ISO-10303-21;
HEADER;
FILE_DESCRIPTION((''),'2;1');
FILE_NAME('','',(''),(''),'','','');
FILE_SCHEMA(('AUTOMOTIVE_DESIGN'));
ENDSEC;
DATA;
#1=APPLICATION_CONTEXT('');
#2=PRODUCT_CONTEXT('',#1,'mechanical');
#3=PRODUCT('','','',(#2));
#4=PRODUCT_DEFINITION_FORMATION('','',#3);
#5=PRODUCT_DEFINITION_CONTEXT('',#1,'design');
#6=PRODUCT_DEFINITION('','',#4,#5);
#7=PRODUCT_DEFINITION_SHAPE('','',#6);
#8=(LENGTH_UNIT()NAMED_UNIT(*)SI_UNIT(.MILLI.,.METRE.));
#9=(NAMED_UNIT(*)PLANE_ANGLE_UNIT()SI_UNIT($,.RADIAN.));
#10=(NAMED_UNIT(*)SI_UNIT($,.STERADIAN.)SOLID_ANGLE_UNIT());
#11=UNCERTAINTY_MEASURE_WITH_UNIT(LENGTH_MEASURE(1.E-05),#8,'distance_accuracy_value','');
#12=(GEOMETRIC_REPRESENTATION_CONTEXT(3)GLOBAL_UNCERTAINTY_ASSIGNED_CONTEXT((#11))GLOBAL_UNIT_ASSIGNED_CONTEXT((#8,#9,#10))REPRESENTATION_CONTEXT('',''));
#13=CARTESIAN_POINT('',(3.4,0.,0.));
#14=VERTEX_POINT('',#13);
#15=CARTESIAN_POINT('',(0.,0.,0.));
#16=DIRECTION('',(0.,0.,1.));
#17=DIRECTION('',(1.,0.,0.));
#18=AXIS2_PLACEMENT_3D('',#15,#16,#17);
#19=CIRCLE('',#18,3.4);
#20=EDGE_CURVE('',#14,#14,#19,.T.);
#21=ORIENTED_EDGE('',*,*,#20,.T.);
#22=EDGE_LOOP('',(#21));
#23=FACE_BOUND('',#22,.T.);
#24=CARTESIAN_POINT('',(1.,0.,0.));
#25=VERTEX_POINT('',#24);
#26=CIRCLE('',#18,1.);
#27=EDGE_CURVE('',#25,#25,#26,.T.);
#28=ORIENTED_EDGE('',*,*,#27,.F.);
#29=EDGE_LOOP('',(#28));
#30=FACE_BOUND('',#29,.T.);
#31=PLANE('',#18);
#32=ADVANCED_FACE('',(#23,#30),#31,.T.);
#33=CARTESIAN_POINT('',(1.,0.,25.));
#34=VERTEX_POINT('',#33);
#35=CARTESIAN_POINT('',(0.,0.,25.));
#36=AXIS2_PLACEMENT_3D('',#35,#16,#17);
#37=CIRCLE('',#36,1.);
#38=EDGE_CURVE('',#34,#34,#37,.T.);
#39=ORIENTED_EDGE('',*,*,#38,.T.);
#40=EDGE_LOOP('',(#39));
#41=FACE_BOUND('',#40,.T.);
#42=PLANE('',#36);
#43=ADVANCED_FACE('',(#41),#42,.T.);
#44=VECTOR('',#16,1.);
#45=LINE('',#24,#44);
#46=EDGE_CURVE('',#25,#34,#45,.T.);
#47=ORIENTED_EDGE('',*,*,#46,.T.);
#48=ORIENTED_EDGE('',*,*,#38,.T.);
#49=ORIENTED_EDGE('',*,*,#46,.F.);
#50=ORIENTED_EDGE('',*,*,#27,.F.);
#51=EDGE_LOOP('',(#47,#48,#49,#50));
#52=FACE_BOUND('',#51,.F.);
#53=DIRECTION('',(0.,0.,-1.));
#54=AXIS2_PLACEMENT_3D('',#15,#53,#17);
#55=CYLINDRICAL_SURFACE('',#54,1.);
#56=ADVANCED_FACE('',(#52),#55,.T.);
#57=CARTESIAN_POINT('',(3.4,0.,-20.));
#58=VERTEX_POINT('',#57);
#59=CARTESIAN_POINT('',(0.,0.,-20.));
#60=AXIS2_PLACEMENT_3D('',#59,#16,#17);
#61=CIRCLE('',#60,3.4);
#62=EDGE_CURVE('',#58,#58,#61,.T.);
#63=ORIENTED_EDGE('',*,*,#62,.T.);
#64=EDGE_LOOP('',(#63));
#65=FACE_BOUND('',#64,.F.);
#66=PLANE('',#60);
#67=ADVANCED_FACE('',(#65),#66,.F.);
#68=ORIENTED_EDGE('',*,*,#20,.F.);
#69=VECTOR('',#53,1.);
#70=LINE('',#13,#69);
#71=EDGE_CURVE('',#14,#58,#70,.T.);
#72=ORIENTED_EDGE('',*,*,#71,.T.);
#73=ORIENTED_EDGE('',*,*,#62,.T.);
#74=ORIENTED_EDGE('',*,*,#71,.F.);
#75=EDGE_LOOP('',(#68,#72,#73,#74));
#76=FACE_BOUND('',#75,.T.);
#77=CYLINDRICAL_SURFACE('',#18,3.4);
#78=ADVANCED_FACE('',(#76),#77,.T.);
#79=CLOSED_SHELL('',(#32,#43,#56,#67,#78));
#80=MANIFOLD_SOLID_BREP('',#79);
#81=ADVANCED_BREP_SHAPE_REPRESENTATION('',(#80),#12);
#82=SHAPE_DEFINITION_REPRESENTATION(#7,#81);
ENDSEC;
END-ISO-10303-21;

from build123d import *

# Parameters (mm, degrees)
F0_R     = 3.4
F0_R_2   = 1
F1_DEPTH = 20
F2_DEPTH = 25


# Not quite as in the source:
# - a feature names something its author has since deleted; it is built from what else it names


with BuildPart() as f1:
    # F0 (on Top) → F1 (new body)
    with BuildSketch(Plane.XY):
        Circle(F0_R)
        Circle(F0_R_2, mode=Mode.SUBTRACT)
        Circle(F0_R_2)
    extrude(amount=-F1_DEPTH)

    # F0 (on Top) → F2 (join)
    with BuildSketch(Plane.XY):
        Circle(F0_R_2)
    extrude(amount=F2_DEPTH)


solid = f1.part
